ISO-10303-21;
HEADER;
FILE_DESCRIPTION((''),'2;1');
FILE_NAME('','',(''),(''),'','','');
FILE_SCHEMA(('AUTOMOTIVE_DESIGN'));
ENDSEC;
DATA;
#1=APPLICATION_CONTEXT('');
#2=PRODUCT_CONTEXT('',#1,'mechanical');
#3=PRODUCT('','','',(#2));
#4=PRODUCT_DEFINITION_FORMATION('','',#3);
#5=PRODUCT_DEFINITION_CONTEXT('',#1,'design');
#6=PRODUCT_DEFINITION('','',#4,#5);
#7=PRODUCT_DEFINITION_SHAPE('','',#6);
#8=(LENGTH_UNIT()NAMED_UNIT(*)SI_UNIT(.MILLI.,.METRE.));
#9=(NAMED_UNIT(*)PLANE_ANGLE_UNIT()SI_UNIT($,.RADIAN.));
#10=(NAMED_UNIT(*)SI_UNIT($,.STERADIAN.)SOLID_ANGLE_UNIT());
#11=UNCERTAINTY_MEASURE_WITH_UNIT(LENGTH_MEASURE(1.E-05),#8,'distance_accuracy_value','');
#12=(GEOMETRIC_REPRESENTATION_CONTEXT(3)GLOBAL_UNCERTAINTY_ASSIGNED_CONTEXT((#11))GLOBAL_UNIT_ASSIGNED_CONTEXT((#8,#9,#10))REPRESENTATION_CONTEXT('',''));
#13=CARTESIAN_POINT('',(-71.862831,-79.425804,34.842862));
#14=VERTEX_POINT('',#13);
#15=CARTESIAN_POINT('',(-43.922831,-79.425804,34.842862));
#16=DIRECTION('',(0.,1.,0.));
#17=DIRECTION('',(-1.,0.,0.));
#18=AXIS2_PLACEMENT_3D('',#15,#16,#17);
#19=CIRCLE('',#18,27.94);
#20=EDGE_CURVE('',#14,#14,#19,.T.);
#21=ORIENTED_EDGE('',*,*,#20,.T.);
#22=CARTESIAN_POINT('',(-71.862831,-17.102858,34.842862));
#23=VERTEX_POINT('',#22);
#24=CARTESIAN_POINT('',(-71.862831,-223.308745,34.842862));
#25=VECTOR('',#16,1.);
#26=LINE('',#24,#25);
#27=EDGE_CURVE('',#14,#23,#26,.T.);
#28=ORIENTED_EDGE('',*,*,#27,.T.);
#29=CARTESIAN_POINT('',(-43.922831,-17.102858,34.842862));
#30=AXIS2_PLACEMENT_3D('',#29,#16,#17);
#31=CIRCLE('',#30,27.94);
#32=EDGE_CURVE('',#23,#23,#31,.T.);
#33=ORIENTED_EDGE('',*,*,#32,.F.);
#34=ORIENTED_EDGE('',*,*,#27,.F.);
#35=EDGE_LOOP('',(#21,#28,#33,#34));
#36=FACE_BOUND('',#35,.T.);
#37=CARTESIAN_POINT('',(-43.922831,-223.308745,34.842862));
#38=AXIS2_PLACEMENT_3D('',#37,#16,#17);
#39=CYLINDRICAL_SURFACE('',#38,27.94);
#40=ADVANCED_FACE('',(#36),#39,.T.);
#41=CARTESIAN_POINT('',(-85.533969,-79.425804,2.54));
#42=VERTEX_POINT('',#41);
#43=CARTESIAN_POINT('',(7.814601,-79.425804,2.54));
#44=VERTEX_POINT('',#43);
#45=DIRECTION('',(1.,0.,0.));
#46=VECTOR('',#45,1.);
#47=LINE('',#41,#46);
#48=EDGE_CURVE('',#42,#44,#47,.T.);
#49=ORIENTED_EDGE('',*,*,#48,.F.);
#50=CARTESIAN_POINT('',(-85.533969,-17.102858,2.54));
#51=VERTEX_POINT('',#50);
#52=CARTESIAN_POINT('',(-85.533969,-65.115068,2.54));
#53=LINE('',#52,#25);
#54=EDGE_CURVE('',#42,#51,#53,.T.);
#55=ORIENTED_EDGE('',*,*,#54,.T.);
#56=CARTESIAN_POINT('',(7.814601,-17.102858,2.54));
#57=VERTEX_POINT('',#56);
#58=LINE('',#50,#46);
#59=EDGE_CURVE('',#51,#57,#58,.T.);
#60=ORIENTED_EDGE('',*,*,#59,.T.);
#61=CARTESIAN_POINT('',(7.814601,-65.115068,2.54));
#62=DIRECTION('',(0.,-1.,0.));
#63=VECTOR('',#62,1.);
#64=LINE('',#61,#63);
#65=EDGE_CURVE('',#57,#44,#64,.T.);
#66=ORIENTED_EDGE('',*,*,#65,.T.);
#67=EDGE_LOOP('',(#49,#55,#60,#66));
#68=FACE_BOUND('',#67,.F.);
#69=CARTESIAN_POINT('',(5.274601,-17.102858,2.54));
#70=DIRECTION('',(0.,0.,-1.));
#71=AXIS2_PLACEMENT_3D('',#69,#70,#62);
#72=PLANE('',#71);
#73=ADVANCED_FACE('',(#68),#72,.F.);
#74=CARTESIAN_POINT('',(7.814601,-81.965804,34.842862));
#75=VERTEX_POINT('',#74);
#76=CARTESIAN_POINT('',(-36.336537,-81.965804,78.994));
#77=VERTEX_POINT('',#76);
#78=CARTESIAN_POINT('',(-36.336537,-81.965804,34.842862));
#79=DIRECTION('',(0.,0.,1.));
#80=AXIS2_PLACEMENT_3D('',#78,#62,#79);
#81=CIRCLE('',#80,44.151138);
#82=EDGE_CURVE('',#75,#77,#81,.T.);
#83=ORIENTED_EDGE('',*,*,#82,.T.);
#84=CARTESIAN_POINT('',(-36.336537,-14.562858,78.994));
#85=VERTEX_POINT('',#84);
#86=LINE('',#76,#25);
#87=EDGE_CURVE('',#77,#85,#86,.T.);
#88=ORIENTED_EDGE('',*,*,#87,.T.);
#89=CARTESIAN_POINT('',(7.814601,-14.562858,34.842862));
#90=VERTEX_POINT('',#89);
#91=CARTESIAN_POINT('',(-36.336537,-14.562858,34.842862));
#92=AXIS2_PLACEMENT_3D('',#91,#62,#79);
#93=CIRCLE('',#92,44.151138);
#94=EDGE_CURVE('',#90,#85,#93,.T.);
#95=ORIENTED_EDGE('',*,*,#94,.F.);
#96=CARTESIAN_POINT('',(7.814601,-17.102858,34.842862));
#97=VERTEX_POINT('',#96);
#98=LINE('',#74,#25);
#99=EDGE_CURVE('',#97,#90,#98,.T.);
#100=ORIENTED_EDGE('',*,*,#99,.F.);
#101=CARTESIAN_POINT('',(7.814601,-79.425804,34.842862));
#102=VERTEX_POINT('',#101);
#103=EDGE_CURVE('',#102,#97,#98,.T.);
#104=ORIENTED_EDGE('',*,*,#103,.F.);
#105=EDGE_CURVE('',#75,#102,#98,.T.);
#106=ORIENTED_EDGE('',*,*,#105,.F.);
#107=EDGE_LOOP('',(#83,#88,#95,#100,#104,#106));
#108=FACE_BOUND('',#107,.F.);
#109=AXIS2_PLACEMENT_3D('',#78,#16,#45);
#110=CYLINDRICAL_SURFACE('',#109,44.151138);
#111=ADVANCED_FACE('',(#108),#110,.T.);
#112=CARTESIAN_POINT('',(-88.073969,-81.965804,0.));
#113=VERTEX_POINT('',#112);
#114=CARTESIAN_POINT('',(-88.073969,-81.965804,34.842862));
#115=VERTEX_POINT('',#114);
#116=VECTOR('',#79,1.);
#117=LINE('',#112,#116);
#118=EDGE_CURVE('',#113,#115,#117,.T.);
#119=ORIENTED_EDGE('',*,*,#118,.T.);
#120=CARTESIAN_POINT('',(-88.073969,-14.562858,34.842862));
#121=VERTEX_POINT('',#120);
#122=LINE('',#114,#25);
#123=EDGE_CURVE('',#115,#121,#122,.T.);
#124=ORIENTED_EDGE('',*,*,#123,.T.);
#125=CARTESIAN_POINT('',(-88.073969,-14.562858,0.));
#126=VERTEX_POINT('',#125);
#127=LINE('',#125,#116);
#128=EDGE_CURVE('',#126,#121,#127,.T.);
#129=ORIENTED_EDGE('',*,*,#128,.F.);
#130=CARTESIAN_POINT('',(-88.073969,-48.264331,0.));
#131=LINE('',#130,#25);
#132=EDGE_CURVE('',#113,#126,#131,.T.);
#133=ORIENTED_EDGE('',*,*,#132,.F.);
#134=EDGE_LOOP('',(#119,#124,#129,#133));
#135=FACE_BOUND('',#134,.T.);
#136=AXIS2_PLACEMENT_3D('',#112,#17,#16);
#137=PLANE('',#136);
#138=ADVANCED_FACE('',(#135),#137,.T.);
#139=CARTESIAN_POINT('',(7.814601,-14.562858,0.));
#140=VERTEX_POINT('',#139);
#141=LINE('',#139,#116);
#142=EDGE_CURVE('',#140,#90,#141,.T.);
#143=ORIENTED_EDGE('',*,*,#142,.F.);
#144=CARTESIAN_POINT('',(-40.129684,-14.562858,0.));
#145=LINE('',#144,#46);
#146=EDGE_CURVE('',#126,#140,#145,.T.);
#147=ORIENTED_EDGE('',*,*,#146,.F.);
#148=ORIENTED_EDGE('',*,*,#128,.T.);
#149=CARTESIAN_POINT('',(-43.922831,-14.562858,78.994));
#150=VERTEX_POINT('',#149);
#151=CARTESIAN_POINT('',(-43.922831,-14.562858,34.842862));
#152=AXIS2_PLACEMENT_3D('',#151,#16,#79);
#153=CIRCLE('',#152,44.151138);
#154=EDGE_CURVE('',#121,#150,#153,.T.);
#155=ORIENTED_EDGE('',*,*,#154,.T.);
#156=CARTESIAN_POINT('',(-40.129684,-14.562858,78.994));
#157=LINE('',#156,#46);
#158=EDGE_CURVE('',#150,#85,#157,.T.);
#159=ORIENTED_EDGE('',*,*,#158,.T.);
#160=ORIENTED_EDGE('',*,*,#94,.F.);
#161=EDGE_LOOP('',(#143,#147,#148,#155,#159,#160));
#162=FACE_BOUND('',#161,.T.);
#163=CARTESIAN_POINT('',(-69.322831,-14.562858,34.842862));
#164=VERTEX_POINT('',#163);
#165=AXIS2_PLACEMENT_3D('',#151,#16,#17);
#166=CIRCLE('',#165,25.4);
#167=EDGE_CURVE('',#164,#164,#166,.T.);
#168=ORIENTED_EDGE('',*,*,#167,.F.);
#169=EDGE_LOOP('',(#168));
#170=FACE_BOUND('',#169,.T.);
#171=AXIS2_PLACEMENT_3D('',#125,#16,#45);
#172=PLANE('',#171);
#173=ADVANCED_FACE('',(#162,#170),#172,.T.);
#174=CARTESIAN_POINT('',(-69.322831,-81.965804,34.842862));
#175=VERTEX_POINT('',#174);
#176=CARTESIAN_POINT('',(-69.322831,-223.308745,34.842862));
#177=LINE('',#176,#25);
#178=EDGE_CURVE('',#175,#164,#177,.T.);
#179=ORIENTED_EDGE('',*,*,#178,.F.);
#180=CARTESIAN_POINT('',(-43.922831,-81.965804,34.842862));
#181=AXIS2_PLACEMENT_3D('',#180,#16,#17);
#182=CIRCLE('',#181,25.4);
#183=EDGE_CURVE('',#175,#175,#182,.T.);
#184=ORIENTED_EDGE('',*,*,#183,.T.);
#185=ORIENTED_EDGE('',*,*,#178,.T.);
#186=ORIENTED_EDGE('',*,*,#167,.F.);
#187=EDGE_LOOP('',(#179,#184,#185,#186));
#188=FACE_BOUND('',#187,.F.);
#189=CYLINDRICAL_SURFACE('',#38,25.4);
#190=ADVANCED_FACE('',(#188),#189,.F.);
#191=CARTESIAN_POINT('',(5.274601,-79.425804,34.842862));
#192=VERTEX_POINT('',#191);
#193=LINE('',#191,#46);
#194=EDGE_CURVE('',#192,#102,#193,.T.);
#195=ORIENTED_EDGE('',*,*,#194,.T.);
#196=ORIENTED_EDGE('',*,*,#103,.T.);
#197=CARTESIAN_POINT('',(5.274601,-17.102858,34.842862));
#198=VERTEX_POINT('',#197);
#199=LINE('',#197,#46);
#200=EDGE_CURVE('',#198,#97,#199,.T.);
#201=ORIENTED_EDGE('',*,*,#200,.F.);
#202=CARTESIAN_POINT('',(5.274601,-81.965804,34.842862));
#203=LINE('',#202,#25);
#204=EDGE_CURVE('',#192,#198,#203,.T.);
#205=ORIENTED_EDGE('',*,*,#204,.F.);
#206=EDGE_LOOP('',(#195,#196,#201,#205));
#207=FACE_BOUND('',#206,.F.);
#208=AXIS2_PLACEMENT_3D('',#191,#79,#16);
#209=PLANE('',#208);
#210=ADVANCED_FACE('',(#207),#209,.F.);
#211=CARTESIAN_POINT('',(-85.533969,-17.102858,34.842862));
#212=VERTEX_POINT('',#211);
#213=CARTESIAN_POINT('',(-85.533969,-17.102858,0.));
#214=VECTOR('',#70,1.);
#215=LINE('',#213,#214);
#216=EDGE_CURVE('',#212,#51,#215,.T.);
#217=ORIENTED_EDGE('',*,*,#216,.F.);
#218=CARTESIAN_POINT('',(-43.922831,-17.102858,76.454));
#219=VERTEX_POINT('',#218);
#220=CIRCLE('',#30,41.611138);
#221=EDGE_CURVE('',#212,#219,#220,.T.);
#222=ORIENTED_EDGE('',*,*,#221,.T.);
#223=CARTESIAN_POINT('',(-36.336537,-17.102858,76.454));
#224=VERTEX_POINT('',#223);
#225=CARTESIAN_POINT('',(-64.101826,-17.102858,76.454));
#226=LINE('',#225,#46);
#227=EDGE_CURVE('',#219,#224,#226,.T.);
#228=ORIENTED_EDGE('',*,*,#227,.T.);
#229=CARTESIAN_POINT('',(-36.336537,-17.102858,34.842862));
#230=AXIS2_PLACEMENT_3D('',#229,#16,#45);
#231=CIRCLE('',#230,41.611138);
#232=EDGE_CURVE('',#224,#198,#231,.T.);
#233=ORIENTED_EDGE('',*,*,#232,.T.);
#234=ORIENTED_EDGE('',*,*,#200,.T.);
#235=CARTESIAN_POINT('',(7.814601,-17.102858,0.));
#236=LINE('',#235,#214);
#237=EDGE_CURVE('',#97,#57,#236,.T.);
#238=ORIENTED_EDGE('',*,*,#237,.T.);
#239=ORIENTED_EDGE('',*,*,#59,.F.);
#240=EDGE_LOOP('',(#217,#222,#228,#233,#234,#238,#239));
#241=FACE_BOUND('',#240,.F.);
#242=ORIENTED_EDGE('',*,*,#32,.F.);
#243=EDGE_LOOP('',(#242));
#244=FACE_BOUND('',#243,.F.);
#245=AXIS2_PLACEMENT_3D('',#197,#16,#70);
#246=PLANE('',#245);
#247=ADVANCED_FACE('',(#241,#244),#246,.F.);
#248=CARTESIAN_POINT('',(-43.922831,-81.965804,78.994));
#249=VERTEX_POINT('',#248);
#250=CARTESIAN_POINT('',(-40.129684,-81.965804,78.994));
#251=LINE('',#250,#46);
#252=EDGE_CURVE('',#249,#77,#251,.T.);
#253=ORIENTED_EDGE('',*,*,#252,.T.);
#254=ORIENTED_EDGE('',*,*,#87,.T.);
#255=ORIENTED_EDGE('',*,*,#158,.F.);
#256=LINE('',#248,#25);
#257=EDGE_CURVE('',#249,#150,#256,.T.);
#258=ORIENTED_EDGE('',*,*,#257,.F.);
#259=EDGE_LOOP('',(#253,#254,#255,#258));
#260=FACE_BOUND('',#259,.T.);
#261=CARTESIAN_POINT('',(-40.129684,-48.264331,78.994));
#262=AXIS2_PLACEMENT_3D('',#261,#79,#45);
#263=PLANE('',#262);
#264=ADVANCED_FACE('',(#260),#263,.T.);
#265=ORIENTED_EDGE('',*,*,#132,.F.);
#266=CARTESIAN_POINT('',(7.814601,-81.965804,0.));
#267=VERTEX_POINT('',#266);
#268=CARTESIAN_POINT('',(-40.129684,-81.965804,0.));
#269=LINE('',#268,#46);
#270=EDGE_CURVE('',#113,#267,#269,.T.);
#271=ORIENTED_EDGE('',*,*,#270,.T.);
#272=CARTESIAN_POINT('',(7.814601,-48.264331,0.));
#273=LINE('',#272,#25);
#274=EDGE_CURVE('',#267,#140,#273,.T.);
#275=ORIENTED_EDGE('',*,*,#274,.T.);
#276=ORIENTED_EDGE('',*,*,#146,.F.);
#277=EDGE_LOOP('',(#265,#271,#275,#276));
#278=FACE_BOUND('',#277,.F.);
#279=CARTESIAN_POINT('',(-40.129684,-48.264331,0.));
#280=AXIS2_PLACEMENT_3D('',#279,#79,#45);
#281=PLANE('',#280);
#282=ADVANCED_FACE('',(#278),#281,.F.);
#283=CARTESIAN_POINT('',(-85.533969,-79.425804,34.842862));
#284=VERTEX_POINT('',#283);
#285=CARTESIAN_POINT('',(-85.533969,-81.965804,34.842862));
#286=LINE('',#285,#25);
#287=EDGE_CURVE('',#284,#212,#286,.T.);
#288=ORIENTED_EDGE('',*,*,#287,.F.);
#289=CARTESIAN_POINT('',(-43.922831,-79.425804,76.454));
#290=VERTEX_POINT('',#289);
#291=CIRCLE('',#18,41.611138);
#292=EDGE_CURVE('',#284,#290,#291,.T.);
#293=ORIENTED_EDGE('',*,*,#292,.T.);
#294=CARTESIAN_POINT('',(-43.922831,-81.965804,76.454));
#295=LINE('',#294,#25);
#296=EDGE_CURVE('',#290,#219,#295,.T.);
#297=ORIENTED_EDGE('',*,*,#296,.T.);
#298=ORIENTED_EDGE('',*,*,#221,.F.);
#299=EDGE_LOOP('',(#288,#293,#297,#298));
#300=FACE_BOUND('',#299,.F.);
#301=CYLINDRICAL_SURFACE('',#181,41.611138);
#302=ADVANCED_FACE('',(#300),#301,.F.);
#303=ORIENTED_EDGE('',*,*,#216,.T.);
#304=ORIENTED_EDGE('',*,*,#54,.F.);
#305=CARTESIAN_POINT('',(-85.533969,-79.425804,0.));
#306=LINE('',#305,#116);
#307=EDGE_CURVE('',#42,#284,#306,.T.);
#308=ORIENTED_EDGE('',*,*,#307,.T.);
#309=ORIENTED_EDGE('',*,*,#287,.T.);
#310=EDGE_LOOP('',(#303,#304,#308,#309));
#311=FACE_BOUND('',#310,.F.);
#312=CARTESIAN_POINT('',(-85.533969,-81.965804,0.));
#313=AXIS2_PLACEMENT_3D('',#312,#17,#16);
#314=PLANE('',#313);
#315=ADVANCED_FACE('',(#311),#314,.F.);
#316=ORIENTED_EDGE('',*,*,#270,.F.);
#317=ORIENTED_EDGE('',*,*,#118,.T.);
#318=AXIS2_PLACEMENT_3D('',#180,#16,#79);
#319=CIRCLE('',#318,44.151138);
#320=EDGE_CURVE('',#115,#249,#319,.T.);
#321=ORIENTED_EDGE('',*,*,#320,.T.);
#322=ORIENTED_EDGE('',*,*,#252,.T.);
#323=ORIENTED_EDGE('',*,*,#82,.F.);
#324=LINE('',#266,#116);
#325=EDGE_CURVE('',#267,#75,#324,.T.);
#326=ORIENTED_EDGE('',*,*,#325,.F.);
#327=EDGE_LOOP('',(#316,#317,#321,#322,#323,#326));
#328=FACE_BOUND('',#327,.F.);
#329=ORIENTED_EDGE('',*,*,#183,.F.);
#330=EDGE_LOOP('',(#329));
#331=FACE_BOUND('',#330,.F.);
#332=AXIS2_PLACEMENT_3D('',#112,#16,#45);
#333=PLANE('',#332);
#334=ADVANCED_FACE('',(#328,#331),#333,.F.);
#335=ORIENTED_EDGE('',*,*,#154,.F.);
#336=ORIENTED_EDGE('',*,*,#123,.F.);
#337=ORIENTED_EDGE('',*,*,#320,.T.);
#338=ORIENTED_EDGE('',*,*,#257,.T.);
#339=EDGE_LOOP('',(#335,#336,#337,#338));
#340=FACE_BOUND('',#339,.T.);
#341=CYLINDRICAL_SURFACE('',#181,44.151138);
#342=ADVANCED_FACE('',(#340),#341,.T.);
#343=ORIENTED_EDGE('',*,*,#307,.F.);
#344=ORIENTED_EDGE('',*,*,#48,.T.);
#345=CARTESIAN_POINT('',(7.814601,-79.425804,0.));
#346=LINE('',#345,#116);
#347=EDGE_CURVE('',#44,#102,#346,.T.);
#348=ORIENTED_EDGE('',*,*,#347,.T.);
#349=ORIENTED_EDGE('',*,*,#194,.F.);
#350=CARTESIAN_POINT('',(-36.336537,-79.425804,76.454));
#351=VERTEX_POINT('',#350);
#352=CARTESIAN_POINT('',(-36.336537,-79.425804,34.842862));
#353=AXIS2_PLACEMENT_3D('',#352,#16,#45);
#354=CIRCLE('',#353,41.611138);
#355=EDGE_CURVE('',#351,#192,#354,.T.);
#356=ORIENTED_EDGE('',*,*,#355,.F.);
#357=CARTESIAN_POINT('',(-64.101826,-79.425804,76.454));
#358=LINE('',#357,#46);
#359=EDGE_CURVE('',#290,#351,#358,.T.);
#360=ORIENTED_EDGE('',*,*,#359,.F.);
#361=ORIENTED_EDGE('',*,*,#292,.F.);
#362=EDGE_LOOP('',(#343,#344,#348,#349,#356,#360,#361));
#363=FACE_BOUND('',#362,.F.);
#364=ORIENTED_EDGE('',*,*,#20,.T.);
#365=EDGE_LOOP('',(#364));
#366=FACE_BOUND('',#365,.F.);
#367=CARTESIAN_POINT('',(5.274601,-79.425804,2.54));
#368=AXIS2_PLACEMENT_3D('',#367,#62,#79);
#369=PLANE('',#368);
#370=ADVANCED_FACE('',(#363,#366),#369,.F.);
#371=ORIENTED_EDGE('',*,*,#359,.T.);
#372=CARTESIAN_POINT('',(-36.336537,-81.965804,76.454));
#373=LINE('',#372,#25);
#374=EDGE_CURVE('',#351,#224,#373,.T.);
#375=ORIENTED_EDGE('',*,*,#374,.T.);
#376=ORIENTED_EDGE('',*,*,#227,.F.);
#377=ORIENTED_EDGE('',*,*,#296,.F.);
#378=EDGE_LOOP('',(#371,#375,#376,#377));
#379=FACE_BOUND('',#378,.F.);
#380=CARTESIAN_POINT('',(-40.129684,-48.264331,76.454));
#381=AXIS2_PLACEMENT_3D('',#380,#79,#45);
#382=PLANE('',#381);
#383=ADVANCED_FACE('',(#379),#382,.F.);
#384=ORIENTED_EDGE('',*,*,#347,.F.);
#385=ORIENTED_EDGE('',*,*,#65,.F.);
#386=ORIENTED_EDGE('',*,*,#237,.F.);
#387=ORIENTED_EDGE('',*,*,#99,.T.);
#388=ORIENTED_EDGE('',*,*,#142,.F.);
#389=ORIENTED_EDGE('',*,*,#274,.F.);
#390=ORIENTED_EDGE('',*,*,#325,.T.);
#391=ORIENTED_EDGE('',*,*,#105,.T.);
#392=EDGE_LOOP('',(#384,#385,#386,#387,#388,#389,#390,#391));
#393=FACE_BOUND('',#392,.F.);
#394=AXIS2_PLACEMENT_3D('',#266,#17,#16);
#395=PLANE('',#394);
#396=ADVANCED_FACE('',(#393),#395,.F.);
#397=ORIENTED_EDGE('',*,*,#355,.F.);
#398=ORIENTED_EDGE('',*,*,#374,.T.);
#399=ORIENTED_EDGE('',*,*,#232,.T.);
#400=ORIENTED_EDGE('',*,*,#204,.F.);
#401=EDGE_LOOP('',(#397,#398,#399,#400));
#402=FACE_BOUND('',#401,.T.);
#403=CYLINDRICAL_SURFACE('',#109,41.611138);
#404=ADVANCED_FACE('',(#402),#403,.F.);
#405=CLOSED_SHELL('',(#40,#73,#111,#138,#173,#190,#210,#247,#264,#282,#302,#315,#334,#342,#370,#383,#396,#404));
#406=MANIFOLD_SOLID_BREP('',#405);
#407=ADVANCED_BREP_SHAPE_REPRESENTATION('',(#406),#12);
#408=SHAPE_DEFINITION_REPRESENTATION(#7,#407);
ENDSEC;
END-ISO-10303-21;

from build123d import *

# Parameters (mm, degrees)
F0_W     = 95.8885699511
F0_H     = 67.4029458314
F1_DEPTH = 78.994
F2_R     = 44.1511376287
F4_D     = 50.8
F5_T     = -2.54


# Not quite as in the source:
# - a shell that OpenCascade refuses in one call is made with other operations: the cavity is built on its own and cut out


with BuildPart() as f1:
    # F0 (on Top) → F1 (new body)
    with BuildSketch(Plane.XY):
        with Locations((-40.1296839118, -48.2643311843)):
            Rectangle(F0_W, F0_H)
    extrude(amount=F1_DEPTH)

    # F2
    f2_edges = [f1.edges().sort_by_distance(p)[0] for p in [
        (-88.073969, -48.264331, 78.994),
        (7.814601, -48.264331, 78.994),
    ]]
    fillet(f2_edges, radius=F2_R)

    # F4 (through all)
    with Locations(Plane.XZ.offset(81.9658041)):
        with Locations((-43.9228312586, 34.8428623713)):
            Hole(F4_D / 2)

    # F5: a shell. OpenCascade refuses it in one call, so the cavity is built on its own and cut out:
    # the body offset inwards by the wall thickness, plus a prism from it out through each open face.
    f5_core = offset(f1.part, amount=F5_T, mode=Mode.PRIVATE)
    f5_exits = [f5_core.faces().sort_by_distance(p)[0] for p in [
        (5.274601, -48.264331, 18.691431),
    ]]
    add(f5_core, mode=Mode.SUBTRACT)
    extrude(f5_exits, amount=-F5_T, mode=Mode.SUBTRACT)


solid = f1.part
